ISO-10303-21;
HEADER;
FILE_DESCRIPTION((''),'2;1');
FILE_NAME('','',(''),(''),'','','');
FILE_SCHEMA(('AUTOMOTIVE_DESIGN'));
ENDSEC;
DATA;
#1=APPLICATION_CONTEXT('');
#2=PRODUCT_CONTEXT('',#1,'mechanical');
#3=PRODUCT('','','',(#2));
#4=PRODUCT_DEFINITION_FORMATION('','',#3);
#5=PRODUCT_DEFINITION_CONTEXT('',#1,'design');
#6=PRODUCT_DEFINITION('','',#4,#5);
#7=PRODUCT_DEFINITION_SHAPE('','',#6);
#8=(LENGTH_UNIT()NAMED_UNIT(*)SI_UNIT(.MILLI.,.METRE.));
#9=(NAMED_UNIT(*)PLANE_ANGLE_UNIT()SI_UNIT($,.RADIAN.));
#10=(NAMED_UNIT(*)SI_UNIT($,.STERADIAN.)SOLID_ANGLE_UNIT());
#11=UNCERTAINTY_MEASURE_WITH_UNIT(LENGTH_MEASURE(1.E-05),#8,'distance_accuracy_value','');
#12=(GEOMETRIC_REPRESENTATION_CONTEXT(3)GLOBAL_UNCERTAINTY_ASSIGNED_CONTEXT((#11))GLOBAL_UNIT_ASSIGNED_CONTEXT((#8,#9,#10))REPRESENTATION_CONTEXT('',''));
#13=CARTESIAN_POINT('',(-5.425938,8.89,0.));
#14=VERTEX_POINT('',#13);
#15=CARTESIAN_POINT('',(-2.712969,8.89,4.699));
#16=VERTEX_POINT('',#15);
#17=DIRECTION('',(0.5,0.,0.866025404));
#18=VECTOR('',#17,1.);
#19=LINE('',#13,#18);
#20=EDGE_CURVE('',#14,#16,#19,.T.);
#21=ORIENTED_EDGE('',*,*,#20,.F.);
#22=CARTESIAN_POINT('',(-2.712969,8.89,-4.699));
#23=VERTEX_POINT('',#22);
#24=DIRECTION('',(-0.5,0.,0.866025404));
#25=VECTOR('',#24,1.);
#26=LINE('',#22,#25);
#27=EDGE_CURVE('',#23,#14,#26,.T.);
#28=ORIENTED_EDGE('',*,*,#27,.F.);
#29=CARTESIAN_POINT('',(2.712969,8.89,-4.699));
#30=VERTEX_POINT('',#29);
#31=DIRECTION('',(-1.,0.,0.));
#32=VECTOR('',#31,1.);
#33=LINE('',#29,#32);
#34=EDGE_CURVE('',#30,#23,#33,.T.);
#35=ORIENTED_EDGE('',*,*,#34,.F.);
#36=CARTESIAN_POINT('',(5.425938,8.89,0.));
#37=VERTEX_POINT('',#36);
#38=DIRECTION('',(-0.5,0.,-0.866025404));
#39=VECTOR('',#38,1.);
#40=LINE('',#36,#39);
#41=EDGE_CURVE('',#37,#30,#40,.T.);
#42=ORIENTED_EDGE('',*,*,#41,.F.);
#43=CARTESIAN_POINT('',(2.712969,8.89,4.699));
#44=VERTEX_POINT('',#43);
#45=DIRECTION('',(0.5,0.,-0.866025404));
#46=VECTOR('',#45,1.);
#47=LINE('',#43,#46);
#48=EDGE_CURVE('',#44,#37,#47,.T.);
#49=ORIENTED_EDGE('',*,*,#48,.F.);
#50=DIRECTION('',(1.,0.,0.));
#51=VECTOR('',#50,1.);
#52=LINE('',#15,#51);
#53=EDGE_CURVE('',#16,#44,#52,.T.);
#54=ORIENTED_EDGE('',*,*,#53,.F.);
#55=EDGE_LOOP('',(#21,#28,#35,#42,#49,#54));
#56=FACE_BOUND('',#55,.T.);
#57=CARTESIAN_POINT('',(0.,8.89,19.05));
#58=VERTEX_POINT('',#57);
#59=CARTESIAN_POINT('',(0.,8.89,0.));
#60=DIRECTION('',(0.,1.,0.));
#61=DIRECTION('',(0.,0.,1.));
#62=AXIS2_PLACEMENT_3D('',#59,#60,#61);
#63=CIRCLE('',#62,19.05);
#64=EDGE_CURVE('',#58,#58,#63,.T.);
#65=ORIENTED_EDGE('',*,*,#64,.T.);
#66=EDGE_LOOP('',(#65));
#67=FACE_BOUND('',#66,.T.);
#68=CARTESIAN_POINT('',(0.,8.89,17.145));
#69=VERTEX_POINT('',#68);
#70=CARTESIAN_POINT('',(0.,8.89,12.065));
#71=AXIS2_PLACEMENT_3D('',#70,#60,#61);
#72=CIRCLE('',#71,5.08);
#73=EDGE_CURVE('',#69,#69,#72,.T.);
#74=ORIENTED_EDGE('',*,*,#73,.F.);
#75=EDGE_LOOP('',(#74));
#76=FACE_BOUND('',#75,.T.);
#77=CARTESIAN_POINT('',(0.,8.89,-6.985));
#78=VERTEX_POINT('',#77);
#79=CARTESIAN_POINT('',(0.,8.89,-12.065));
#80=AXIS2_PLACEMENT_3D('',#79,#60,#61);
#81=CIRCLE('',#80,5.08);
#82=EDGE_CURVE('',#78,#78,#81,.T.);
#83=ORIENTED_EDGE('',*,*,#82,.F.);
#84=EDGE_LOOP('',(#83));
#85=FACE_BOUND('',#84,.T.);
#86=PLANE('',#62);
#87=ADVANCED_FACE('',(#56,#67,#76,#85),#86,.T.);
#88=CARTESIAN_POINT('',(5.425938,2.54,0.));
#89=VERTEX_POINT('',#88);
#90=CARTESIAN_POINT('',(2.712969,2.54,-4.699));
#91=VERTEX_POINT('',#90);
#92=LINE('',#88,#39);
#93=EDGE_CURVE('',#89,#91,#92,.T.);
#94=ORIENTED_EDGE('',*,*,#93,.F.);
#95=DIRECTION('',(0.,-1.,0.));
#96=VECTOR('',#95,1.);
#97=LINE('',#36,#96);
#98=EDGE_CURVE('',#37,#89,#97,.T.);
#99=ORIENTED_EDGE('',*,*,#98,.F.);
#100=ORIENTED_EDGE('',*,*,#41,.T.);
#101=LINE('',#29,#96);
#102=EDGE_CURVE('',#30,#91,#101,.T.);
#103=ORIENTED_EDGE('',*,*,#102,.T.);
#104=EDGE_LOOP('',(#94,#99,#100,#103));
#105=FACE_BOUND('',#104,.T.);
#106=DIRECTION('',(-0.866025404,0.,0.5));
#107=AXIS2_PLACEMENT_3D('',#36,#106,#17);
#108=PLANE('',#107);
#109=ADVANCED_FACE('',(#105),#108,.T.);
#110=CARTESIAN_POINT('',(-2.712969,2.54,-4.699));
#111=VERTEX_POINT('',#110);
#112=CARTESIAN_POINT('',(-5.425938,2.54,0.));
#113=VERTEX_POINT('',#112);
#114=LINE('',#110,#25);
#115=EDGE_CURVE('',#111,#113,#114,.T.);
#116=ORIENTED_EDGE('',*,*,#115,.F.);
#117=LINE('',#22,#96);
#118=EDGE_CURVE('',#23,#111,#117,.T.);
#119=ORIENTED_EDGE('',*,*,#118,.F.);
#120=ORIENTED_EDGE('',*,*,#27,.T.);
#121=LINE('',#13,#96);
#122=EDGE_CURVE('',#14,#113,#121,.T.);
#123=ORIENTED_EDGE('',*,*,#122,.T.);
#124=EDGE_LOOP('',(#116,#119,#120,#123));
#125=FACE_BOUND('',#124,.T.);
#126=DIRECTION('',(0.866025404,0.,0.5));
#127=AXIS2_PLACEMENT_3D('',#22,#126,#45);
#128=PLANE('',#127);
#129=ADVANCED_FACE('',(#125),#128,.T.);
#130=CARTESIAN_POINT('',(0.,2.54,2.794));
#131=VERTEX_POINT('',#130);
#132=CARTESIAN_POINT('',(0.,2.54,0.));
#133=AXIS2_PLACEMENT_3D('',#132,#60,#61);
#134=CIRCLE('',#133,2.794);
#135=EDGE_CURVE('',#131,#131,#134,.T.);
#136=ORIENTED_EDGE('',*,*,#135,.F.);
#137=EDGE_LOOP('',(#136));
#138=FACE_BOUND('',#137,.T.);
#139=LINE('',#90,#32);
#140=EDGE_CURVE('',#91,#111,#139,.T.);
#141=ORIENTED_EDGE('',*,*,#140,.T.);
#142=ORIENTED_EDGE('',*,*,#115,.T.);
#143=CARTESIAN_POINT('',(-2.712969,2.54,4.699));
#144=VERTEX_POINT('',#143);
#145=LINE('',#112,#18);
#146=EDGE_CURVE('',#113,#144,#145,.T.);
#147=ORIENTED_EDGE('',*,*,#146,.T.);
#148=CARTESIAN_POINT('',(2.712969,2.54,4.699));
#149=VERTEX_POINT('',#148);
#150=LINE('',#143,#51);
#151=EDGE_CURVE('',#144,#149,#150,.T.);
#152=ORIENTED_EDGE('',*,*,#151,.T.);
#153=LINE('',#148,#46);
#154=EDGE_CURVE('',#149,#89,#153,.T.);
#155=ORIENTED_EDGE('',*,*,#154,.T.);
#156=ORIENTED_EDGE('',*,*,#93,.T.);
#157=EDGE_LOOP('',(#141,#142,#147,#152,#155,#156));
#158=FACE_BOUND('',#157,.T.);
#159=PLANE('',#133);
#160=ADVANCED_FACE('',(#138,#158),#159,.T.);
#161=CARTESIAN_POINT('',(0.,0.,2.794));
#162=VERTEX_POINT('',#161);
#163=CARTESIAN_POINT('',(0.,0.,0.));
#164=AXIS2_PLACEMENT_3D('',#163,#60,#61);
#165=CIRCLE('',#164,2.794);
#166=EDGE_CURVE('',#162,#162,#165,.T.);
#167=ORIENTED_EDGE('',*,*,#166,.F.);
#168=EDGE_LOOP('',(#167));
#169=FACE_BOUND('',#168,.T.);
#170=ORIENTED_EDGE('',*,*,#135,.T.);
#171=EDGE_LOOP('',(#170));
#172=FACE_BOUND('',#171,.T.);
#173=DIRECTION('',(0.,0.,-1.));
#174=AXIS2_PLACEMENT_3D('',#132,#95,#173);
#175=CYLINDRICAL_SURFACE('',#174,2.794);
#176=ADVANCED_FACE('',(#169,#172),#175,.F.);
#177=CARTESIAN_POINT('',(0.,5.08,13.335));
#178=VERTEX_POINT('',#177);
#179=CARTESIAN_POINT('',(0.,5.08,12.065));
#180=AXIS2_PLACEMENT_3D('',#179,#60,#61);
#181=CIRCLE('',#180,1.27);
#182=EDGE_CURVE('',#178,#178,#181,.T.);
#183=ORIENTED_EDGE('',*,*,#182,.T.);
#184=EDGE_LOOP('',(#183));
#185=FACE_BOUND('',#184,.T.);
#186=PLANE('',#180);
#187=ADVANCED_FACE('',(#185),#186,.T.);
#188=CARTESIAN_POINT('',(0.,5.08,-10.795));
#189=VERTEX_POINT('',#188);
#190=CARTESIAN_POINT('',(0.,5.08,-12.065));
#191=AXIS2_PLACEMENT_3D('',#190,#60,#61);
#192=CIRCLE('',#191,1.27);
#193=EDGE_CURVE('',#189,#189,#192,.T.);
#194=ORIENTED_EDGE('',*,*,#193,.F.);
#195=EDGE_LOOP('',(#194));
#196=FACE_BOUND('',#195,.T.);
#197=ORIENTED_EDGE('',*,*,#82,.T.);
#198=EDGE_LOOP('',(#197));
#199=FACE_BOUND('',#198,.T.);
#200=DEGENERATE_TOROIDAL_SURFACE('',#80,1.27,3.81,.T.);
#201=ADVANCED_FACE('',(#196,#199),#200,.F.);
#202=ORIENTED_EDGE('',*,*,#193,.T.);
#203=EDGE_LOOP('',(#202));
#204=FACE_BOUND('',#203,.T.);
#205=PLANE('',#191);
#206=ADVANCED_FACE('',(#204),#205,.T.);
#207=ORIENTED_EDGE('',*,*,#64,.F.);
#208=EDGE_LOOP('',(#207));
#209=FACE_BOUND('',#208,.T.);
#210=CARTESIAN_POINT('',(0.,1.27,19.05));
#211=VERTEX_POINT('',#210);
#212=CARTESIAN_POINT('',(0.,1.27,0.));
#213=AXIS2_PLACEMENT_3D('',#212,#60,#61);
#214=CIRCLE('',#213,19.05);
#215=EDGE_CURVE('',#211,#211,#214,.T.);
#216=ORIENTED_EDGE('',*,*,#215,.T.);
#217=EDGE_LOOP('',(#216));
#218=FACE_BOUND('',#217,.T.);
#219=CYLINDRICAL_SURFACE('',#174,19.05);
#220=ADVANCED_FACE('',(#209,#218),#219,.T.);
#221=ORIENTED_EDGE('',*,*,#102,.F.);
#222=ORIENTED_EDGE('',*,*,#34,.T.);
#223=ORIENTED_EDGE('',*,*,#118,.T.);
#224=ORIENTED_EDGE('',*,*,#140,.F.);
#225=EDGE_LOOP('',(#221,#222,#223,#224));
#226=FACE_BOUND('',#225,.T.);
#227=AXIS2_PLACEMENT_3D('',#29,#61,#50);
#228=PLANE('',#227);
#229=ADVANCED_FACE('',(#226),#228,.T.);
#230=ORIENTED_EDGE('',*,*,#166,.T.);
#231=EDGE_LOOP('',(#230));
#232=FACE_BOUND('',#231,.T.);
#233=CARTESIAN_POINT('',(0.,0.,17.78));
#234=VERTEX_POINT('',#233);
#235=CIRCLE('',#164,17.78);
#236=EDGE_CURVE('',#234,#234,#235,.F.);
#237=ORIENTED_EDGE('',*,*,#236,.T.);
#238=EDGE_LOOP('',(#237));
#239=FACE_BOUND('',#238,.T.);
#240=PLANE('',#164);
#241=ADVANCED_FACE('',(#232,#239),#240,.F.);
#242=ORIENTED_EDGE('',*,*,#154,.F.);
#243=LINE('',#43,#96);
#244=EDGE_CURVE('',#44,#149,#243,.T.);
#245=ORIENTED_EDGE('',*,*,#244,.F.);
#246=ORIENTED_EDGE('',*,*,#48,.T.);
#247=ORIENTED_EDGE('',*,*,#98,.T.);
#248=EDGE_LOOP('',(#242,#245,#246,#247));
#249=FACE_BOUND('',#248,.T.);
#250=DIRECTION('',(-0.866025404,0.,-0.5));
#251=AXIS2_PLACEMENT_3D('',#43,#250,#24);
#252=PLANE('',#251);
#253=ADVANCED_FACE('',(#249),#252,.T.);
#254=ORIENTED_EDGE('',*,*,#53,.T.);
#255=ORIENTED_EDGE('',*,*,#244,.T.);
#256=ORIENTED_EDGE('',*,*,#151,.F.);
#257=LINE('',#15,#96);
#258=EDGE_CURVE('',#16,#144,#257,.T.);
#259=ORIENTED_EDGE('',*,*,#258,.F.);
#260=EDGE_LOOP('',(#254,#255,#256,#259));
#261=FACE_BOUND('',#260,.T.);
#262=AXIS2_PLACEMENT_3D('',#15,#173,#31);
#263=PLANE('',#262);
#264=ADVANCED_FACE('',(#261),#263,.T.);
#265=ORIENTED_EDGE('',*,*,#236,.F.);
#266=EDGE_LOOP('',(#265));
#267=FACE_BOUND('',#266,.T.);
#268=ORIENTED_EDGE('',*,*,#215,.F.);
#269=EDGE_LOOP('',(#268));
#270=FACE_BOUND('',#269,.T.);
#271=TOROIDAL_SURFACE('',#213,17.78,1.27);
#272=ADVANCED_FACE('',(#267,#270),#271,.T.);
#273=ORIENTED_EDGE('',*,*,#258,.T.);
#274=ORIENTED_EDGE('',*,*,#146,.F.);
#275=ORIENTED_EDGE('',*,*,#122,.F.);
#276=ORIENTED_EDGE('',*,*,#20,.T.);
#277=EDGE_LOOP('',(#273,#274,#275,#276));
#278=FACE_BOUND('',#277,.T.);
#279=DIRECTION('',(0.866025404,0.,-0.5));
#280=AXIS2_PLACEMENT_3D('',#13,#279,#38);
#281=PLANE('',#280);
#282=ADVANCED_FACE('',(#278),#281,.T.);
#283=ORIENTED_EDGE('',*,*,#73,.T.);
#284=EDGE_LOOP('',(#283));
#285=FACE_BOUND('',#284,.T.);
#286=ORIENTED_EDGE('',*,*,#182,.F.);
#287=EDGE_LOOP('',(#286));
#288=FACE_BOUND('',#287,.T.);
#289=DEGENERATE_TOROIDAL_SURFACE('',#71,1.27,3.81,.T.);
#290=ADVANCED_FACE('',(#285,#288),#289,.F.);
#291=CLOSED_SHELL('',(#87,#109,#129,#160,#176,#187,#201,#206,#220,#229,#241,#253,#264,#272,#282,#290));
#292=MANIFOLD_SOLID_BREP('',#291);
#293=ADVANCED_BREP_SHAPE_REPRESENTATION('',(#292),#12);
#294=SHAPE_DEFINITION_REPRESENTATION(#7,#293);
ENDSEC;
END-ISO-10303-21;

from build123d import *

# Parameters (mm, degrees)
SKETCH1_R           = 19.05
SKETCH1_R_2         = 2.794
BOSS_EXTRUDE1_DEPTH = 2.54
SKETCH2_R           = 19.05
BOSS_EXTRUDE2_DEPTH = 6.35
SKETCH3_R           = 5.08
CUT_EXTRUDE1_DEPTH  = 3.81
FILLET1_R           = 3.81
FILLET2_R           = 1.27


with BuildPart() as part:
    # Sketch1 → Boss-Extrude1 (new body)
    with BuildSketch(Plane(origin=(0, 0, 0), x_dir=(1, 0, 0), z_dir=(0, 1, 0))):
        with Locations(Location((0, 0, 0), (0, 0, 270))):
            Circle(SKETCH1_R)
        with Locations(Location((0, 0, 0), (0, 0, 270))):
            Circle(SKETCH1_R_2, mode=Mode.SUBTRACT)
    extrude(amount=BOSS_EXTRUDE1_DEPTH)

    # Sketch2 → Boss-Extrude2 (add)
    with BuildSketch(Plane(origin=(0, 2.54, 0), x_dir=(1, 0, 0), z_dir=(0, 1, 0))):
        with Locations(Location((0, 0, 0), (0, 0, 270))):
            Circle(SKETCH2_R)
        Polygon((5.42593783, 0), (2.712968915, 4.699), (-2.712968915, 4.699), (-5.42593783, 0), (-2.712968915, -4.699), (2.712968915, -4.699), align=None, mode=Mode.SUBTRACT)
    extrude(amount=BOSS_EXTRUDE2_DEPTH)

    # Sketch3 → Cut-Extrude1 (cut)
    with BuildSketch(Plane(origin=(0, 8.89, 0), x_dir=(1, 0, 0), z_dir=(0, 1, 0))):
        with Locations(Location((0, 12.065, 0), (0, 0, 270))):
            Circle(SKETCH3_R)
        with Locations(Location((0, -12.065, 0), (0, 0, 270))):
            Circle(SKETCH3_R)
    extrude(amount=-CUT_EXTRUDE1_DEPTH, mode=Mode.SUBTRACT)

    # Fillet1
    fillet1_edges = [part.edges().sort_by_distance(p)[0] for p in [
        (0, 5.08, -17.145),
        (0, 5.08, 6.985),
    ]]
    fillet(fillet1_edges, radius=FILLET1_R - 0.0001)  # a hair under: the kernel refuses the full size

    # Fillet2
    fillet2_edges = [part.edges().sort_by_distance(p)[0] for p in [
        (0, 0, -19.05),
    ]]
    fillet(fillet2_edges, radius=FILLET2_R)


solid = part.part
